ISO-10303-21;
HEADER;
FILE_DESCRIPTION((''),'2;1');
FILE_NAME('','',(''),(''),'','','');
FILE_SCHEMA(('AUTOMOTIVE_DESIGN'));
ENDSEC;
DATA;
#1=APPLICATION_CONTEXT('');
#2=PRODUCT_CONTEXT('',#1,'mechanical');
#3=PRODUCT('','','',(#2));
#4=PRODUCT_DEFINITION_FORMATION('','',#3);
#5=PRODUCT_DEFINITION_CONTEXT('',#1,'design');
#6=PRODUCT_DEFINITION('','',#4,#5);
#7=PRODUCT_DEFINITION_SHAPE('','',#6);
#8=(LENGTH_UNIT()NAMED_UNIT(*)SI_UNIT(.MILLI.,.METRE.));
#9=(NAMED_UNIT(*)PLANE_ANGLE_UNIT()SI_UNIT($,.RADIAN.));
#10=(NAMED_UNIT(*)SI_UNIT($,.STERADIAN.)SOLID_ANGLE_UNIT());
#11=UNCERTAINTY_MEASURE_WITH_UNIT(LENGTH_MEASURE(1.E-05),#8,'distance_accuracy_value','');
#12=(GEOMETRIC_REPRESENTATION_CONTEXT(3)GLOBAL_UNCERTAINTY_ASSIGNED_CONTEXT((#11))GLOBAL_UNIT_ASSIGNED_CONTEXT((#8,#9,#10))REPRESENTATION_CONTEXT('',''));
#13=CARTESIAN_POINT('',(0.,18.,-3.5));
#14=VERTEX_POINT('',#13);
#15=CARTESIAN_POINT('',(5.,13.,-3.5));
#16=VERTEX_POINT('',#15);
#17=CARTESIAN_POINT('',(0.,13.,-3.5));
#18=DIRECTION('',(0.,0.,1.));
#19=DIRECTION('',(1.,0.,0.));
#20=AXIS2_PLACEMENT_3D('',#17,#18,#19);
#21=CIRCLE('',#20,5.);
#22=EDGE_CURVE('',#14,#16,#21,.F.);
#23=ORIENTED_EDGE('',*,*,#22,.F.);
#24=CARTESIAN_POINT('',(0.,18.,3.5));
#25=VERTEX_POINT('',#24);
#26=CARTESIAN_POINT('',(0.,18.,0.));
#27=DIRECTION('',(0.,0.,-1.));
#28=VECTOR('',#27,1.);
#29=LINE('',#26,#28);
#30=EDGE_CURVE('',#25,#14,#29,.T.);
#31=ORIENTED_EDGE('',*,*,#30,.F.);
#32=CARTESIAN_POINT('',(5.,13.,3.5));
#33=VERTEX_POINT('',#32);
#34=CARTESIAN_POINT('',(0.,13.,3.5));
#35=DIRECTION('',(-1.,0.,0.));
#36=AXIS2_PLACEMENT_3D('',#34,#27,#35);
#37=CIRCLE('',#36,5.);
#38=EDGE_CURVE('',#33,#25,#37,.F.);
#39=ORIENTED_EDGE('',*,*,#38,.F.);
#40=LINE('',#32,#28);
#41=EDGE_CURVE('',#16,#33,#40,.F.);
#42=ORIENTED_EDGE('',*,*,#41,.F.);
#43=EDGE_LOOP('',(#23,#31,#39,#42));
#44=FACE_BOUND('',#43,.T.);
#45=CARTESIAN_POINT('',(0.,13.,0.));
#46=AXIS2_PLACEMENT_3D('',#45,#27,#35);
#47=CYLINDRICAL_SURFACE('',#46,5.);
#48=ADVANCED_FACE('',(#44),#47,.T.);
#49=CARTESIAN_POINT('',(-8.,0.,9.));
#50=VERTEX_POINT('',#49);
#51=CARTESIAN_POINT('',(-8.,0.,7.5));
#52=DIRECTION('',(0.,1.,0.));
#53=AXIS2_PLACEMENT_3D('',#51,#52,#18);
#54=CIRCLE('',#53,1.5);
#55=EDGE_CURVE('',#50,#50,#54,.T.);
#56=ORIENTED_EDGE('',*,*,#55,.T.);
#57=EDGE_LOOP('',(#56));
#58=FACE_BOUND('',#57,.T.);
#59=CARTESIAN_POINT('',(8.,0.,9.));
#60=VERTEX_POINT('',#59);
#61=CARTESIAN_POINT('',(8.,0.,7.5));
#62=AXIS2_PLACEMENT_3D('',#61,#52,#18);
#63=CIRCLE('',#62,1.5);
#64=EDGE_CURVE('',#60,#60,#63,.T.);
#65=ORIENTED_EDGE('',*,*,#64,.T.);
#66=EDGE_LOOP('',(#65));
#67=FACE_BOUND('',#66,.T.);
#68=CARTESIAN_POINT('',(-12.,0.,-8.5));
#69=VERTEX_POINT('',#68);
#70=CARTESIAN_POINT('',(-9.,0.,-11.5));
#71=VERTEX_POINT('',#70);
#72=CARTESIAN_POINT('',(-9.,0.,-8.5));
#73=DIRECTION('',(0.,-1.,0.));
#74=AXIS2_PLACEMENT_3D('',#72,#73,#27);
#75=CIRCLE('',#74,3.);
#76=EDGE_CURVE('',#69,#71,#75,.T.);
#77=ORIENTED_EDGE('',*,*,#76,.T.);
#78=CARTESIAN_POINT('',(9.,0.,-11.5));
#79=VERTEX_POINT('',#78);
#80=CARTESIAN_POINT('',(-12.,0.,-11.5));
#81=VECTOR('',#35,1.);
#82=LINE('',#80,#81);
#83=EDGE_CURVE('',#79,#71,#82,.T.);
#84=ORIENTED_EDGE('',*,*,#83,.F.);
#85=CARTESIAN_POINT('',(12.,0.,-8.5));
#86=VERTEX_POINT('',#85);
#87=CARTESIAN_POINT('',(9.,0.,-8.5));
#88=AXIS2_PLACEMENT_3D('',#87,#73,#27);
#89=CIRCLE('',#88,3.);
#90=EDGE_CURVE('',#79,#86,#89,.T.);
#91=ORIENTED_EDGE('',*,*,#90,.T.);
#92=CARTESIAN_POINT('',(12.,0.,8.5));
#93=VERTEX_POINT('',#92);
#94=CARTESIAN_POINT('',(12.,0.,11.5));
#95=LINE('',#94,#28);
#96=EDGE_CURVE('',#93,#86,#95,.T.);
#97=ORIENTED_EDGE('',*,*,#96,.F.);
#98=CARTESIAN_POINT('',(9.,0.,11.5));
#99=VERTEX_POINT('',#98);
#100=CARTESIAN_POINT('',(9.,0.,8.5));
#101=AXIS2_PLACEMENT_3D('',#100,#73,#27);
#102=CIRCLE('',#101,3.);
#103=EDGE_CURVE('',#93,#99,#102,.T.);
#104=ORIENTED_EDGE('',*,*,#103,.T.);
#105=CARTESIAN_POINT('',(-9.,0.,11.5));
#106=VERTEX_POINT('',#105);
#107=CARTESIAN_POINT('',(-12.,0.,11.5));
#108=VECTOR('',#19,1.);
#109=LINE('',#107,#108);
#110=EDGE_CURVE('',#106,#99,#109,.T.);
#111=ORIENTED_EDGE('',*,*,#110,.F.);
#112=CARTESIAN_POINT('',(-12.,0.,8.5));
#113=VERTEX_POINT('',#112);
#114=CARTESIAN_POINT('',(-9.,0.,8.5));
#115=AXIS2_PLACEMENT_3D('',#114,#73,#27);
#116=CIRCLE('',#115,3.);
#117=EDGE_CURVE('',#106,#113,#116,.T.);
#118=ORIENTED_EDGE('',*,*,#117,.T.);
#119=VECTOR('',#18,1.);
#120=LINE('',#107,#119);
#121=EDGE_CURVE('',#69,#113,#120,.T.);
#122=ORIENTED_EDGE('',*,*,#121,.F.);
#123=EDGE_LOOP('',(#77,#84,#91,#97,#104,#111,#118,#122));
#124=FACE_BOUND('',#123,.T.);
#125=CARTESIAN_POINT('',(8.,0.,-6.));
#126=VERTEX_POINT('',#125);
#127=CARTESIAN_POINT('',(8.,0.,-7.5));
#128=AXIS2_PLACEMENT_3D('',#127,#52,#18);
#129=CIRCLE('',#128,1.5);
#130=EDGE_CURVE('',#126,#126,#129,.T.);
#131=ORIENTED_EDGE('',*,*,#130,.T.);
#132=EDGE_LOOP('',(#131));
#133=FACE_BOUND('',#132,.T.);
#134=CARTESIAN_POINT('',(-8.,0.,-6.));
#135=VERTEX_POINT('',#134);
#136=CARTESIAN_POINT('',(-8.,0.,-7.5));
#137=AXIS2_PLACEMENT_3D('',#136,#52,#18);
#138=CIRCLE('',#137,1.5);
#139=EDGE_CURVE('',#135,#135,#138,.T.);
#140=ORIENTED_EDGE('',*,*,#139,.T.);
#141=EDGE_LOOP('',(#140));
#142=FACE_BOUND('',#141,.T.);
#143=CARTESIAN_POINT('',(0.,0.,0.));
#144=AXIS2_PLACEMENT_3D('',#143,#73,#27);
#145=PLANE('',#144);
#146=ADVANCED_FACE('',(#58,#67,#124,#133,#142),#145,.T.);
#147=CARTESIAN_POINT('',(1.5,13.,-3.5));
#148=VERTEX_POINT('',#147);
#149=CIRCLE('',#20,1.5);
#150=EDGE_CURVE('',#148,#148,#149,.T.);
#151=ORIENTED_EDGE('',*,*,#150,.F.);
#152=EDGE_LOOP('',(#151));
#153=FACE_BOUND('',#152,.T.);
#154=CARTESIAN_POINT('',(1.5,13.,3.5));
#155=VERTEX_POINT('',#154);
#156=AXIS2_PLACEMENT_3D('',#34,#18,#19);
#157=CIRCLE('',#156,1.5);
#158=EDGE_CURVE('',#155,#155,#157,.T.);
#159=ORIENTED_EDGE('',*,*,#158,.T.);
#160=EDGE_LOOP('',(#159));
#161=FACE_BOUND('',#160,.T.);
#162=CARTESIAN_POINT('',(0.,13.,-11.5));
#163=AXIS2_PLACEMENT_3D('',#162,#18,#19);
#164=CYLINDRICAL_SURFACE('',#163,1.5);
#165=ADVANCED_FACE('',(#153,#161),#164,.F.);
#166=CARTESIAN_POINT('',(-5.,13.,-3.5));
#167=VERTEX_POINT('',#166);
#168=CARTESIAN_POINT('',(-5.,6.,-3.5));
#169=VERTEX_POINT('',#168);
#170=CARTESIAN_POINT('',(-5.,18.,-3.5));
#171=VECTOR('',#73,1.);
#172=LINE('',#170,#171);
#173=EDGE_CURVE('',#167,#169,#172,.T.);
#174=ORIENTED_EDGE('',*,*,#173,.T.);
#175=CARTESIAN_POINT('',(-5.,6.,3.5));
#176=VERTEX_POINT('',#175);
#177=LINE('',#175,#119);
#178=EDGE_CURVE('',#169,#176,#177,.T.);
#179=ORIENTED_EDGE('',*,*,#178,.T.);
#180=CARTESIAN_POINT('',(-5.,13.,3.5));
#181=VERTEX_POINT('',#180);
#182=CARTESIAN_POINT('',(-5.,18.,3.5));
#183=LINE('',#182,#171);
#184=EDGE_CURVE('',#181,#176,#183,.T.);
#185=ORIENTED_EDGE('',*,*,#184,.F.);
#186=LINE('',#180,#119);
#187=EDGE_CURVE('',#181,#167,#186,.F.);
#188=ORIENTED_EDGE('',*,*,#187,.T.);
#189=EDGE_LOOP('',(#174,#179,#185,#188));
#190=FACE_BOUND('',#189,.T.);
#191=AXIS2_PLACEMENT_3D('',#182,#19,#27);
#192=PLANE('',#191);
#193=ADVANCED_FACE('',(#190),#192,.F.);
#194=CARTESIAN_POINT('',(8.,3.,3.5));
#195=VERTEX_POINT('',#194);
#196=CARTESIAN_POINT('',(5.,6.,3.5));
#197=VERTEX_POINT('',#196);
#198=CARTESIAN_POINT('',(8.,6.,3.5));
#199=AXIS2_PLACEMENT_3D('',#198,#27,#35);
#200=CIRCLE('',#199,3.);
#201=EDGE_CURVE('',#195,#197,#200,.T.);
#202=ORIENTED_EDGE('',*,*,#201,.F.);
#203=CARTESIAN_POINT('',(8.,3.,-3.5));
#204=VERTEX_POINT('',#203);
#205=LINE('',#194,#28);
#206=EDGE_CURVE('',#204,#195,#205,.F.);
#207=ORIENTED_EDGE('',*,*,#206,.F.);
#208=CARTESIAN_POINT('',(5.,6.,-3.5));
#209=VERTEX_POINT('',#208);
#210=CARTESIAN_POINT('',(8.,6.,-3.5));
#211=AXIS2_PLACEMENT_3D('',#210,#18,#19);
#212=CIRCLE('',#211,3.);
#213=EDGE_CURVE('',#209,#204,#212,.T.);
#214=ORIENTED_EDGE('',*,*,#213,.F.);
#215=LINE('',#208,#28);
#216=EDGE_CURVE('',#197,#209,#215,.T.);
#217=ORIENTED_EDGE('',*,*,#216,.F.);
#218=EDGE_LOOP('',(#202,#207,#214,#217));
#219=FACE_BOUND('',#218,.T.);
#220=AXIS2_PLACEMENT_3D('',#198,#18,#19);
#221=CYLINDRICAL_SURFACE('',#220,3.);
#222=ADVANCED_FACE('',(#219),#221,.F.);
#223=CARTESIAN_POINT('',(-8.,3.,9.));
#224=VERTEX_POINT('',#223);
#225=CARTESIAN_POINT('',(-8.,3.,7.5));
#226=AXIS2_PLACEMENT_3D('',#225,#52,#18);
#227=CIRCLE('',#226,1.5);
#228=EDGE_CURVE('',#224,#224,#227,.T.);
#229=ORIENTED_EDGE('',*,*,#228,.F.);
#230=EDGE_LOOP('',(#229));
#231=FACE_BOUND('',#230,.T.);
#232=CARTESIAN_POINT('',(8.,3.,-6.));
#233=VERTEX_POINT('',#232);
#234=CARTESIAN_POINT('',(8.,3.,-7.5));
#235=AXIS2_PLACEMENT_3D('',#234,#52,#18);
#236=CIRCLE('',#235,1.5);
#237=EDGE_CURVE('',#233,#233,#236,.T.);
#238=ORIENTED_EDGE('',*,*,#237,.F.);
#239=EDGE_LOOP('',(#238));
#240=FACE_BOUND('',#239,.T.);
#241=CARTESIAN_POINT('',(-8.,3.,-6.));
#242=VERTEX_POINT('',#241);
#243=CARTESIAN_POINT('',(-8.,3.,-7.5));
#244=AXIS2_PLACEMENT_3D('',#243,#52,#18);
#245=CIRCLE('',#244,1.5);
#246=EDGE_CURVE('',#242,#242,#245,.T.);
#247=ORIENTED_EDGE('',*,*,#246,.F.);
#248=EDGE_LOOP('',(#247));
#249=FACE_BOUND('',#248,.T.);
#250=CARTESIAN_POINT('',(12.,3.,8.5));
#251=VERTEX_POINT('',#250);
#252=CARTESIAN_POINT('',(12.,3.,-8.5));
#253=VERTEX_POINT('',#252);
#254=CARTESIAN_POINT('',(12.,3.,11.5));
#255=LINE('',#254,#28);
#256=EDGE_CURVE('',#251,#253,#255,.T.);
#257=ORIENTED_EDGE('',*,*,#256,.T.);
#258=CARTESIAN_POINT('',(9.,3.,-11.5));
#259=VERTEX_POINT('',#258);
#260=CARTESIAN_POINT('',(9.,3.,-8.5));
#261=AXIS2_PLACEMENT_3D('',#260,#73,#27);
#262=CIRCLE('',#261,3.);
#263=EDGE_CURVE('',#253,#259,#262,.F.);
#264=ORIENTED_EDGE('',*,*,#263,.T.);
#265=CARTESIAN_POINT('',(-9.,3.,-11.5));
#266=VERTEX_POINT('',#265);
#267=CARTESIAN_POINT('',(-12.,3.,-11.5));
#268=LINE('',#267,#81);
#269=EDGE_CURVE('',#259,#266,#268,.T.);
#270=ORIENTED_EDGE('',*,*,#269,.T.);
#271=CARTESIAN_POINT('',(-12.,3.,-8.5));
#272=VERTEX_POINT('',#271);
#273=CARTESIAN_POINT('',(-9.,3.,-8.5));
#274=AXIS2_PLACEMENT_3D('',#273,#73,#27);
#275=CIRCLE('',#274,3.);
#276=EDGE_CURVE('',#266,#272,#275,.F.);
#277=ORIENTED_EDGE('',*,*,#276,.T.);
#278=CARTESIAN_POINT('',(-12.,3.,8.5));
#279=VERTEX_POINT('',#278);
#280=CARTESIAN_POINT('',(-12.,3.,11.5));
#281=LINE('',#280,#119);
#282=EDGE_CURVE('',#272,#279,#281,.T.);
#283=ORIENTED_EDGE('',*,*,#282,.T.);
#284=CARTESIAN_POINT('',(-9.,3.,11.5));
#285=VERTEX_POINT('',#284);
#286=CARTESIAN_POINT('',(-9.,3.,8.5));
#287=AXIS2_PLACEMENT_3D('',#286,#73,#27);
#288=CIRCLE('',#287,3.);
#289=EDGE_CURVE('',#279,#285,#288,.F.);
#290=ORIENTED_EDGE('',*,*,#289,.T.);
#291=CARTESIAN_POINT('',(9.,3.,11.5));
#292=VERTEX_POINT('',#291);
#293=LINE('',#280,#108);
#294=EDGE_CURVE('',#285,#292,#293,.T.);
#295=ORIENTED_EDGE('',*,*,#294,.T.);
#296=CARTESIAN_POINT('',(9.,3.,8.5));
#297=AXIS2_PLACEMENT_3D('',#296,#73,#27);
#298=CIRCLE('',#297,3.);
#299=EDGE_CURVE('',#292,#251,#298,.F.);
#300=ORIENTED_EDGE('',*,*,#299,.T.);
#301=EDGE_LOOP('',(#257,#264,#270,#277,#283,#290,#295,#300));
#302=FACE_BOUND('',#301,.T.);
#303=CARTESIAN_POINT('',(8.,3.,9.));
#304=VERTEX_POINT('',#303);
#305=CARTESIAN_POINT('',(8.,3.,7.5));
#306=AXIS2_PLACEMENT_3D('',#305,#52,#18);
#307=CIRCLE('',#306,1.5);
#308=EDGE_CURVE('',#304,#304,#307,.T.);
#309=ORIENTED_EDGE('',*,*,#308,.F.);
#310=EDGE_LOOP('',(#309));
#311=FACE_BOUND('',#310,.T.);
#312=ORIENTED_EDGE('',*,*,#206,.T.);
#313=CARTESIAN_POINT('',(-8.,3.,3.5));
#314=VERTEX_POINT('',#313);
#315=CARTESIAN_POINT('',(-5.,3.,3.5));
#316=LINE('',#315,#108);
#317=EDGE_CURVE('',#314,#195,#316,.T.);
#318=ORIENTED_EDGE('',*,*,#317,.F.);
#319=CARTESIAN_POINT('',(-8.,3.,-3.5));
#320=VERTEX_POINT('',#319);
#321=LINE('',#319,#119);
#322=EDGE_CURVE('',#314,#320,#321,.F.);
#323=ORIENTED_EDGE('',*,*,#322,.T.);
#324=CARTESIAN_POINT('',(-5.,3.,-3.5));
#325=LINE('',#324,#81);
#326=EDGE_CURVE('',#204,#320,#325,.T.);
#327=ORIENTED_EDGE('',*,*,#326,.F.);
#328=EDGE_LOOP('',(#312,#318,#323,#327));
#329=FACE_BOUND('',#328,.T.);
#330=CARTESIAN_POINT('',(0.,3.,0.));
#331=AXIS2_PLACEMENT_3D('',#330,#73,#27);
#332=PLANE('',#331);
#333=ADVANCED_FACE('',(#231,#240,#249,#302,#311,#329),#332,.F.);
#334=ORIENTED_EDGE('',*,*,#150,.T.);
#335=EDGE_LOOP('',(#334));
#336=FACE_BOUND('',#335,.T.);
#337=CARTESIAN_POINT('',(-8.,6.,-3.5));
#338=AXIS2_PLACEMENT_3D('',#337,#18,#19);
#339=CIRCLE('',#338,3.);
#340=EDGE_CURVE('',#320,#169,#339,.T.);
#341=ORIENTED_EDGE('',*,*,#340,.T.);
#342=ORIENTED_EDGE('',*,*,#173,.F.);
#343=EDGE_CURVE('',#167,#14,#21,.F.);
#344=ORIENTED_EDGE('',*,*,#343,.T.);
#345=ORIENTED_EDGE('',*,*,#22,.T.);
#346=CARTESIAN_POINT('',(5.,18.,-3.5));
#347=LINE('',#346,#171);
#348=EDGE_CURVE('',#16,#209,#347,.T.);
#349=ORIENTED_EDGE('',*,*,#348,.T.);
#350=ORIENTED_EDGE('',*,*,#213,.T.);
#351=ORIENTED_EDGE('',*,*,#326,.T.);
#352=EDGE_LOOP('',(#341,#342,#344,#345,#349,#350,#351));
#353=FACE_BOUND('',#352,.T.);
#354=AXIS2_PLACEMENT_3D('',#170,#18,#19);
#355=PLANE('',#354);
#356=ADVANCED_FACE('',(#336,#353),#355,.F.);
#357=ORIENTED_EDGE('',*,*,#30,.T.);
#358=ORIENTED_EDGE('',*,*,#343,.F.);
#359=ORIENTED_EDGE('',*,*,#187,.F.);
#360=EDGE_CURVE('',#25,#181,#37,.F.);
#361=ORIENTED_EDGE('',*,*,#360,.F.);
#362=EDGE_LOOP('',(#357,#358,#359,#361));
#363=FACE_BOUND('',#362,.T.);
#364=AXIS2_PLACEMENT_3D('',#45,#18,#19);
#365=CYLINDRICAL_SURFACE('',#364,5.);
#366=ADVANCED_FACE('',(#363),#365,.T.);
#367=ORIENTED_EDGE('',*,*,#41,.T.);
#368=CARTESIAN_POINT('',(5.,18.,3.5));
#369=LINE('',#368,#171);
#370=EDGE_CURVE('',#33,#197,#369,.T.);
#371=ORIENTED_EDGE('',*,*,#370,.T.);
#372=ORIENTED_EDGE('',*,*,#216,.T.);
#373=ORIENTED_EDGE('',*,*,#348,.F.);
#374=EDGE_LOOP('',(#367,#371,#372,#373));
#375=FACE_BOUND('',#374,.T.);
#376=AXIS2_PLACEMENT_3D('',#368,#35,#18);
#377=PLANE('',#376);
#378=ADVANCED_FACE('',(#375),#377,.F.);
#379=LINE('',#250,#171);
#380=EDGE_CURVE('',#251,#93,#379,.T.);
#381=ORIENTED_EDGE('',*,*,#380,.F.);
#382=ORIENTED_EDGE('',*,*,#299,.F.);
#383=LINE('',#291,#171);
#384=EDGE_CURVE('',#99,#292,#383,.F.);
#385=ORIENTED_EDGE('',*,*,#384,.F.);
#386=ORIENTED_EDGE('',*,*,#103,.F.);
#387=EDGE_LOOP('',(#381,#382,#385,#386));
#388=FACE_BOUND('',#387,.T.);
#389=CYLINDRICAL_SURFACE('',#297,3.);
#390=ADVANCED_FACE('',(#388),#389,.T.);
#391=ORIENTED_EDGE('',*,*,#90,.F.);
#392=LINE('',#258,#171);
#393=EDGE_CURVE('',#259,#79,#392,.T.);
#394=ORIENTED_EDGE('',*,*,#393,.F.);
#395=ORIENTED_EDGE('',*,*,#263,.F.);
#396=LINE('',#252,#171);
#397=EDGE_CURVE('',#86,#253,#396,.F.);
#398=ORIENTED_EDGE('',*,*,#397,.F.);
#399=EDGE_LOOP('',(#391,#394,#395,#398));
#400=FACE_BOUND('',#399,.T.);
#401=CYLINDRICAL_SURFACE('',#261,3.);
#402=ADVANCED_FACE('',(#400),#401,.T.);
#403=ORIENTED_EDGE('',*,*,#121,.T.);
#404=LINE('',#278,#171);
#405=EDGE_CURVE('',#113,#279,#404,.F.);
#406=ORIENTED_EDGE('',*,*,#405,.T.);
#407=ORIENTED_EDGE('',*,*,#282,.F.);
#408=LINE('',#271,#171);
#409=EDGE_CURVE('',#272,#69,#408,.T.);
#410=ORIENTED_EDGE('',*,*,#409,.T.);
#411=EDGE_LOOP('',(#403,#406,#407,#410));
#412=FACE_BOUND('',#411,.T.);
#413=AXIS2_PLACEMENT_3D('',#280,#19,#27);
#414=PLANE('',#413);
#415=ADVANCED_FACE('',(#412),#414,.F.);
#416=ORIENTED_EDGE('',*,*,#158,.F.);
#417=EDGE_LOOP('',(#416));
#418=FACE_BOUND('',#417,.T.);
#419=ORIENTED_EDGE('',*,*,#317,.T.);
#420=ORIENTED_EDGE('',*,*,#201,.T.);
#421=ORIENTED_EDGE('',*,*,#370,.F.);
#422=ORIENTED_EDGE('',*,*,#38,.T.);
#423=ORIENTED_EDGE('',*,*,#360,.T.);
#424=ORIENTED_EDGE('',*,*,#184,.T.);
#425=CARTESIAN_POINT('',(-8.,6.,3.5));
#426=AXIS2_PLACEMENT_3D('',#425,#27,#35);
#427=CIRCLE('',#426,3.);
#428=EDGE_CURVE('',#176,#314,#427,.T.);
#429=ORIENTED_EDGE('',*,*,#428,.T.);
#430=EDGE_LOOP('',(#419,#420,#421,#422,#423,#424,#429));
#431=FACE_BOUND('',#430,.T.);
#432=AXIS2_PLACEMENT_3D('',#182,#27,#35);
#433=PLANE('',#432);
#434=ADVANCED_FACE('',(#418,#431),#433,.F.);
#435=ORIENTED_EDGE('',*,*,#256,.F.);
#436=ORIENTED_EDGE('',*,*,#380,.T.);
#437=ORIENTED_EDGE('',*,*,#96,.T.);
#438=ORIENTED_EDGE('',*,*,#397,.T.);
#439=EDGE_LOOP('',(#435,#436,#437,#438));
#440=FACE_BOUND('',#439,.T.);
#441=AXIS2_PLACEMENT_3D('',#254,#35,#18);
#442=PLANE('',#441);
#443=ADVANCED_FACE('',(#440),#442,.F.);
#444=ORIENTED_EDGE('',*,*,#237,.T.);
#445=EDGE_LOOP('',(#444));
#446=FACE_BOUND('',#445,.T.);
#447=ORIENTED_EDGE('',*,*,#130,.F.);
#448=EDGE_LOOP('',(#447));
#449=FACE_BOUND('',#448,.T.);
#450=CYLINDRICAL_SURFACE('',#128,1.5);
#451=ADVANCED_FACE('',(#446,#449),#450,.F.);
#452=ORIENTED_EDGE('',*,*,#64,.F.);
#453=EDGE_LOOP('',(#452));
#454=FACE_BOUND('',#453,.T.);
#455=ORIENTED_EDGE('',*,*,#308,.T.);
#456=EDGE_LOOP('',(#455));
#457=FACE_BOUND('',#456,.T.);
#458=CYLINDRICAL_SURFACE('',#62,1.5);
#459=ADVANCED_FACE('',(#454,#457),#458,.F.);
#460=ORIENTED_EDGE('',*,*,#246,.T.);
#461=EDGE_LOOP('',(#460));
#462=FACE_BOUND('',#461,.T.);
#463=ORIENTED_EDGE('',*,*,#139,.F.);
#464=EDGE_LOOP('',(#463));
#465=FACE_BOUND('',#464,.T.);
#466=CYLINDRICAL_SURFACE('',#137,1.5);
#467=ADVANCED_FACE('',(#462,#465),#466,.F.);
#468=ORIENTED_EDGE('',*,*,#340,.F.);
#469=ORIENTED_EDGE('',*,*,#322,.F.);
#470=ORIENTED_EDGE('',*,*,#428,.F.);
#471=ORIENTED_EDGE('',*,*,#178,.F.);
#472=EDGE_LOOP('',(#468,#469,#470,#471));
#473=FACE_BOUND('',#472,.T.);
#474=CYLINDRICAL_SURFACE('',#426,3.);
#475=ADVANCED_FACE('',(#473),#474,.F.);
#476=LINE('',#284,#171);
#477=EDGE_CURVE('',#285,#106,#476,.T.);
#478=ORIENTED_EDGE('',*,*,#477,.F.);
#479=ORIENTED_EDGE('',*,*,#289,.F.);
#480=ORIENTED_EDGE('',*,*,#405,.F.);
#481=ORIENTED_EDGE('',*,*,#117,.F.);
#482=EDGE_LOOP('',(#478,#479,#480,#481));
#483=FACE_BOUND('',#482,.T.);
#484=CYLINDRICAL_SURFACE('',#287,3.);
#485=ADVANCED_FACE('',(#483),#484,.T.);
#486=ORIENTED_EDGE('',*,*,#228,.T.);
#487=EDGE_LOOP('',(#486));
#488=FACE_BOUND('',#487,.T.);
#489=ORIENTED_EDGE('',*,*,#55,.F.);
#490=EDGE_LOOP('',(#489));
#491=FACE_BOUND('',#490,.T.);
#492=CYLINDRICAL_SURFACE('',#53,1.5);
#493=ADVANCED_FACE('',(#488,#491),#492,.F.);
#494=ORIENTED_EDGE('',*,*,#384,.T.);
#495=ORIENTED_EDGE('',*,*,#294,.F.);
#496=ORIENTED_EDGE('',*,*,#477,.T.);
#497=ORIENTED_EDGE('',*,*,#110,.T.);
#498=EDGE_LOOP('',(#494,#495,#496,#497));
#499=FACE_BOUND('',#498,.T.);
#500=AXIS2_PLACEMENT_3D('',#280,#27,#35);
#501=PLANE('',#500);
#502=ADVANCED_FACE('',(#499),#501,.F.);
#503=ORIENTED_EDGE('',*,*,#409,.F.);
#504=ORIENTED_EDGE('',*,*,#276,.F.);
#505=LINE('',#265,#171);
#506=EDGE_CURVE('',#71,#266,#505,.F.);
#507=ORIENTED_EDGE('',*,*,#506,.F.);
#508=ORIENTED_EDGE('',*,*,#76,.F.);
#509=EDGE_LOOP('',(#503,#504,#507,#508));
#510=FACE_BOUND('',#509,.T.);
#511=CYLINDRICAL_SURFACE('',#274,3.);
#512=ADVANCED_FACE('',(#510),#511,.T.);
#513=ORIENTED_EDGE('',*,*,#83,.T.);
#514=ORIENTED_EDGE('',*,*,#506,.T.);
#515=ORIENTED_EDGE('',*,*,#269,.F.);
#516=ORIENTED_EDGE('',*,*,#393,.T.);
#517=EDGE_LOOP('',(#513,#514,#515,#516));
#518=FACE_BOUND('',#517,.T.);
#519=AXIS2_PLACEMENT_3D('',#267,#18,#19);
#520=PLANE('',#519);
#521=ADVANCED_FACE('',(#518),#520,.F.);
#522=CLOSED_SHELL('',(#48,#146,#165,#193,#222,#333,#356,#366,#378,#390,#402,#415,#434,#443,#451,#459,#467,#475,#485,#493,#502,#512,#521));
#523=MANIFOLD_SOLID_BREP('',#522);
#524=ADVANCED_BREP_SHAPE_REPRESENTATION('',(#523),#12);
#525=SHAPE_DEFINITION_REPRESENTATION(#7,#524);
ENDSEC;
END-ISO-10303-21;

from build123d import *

# Parameters (mm, degrees)
SKETCH_1_W          = 24
SKETCH_1_H          = 23
EXTRUDE_1_DEPTH     = 3
SKETCH_2_W          = 10
SKETCH_2_H          = 7
EXTRUDE_2_DEPTH     = 15
SKETCH_3_R          = 1.5
CUT_EXTRUDE_2_DEPTH = 27.324893162
SKETCH_4_R          = 1.5
CUT_EXTRUDE_3_DEPTH = 23.388613177
FILLET_1_R          = 5
FILLET_2_R          = 3
FILLET_3_R          = 3


with BuildPart() as part:
    # 草图1 → 凸台-拉伸1 (new body)
    with BuildSketch(Plane(origin=(0, 0, 0), x_dir=(1, 0, 0), z_dir=(0, 1, 0))):
        Rectangle(SKETCH_1_W, SKETCH_1_H)
    extrude(amount=EXTRUDE_1_DEPTH)

    # 草图2 → 凸台-拉伸2 (add)
    with BuildSketch(Plane(origin=(0, 3, 0), x_dir=(1, 0, 0), z_dir=(0, 1, 0))):
        Rectangle(SKETCH_2_W, SKETCH_2_H)
    extrude(amount=EXTRUDE_2_DEPTH)

    # 草图3 → 切除-拉伸2 (cut, through all)
    with BuildSketch(Plane.XY.offset(3.5)):
        with Locations((0, 13)):
            Circle(SKETCH_3_R)
    extrude(amount=-CUT_EXTRUDE_2_DEPTH, mode=Mode.SUBTRACT)

    # 草图4 → 切除-拉伸3 (cut, through all)
    with BuildSketch(Plane(origin=(0, 3, 0), x_dir=(1, 0, 0), z_dir=(0, 1, 0))):
        with Locations(Location((-8, 7.5, 0), (0, 0, 270))):
            Circle(SKETCH_4_R)
        with Locations(Location((-8, -7.5, 0), (0, 0, 270))):
            Circle(SKETCH_4_R)
        with Locations(Location((8, -7.5, 0), (0, 0, 270))):
            Circle(SKETCH_4_R)
        with Locations(Location((8, 7.5, 0), (0, 0, 270))):
            Circle(SKETCH_4_R)
    extrude(amount=-CUT_EXTRUDE_3_DEPTH, mode=Mode.SUBTRACT)

    # 圆角1
    fillet_1_edges = [part.edges().sort_by_distance(p)[0] for p in [
        (-5, 18, 0),
        (5, 18, 0),
    ]]
    fillet(fillet_1_edges, radius=FILLET_1_R - 0.0001)  # a hair under: the kernel refuses the full size

    # 圆角2
    fillet_2_edges = [part.edges().sort_by_distance(p)[0] for p in [
        (5, 3, 0),
        (-5, 3, 0),
    ]]
    fillet(fillet_2_edges, radius=FILLET_2_R)

    # 圆角3
    fillet_3_edges = [part.edges().sort_by_distance(p)[0] for p in [
        (12, 1.5, 11.5),
        (-12, 1.5, 11.5),
        (-12, 1.5, -11.5),
        (12, 1.5, -11.5),
    ]]
    fillet(fillet_3_edges, radius=FILLET_3_R)


solid = part.part
